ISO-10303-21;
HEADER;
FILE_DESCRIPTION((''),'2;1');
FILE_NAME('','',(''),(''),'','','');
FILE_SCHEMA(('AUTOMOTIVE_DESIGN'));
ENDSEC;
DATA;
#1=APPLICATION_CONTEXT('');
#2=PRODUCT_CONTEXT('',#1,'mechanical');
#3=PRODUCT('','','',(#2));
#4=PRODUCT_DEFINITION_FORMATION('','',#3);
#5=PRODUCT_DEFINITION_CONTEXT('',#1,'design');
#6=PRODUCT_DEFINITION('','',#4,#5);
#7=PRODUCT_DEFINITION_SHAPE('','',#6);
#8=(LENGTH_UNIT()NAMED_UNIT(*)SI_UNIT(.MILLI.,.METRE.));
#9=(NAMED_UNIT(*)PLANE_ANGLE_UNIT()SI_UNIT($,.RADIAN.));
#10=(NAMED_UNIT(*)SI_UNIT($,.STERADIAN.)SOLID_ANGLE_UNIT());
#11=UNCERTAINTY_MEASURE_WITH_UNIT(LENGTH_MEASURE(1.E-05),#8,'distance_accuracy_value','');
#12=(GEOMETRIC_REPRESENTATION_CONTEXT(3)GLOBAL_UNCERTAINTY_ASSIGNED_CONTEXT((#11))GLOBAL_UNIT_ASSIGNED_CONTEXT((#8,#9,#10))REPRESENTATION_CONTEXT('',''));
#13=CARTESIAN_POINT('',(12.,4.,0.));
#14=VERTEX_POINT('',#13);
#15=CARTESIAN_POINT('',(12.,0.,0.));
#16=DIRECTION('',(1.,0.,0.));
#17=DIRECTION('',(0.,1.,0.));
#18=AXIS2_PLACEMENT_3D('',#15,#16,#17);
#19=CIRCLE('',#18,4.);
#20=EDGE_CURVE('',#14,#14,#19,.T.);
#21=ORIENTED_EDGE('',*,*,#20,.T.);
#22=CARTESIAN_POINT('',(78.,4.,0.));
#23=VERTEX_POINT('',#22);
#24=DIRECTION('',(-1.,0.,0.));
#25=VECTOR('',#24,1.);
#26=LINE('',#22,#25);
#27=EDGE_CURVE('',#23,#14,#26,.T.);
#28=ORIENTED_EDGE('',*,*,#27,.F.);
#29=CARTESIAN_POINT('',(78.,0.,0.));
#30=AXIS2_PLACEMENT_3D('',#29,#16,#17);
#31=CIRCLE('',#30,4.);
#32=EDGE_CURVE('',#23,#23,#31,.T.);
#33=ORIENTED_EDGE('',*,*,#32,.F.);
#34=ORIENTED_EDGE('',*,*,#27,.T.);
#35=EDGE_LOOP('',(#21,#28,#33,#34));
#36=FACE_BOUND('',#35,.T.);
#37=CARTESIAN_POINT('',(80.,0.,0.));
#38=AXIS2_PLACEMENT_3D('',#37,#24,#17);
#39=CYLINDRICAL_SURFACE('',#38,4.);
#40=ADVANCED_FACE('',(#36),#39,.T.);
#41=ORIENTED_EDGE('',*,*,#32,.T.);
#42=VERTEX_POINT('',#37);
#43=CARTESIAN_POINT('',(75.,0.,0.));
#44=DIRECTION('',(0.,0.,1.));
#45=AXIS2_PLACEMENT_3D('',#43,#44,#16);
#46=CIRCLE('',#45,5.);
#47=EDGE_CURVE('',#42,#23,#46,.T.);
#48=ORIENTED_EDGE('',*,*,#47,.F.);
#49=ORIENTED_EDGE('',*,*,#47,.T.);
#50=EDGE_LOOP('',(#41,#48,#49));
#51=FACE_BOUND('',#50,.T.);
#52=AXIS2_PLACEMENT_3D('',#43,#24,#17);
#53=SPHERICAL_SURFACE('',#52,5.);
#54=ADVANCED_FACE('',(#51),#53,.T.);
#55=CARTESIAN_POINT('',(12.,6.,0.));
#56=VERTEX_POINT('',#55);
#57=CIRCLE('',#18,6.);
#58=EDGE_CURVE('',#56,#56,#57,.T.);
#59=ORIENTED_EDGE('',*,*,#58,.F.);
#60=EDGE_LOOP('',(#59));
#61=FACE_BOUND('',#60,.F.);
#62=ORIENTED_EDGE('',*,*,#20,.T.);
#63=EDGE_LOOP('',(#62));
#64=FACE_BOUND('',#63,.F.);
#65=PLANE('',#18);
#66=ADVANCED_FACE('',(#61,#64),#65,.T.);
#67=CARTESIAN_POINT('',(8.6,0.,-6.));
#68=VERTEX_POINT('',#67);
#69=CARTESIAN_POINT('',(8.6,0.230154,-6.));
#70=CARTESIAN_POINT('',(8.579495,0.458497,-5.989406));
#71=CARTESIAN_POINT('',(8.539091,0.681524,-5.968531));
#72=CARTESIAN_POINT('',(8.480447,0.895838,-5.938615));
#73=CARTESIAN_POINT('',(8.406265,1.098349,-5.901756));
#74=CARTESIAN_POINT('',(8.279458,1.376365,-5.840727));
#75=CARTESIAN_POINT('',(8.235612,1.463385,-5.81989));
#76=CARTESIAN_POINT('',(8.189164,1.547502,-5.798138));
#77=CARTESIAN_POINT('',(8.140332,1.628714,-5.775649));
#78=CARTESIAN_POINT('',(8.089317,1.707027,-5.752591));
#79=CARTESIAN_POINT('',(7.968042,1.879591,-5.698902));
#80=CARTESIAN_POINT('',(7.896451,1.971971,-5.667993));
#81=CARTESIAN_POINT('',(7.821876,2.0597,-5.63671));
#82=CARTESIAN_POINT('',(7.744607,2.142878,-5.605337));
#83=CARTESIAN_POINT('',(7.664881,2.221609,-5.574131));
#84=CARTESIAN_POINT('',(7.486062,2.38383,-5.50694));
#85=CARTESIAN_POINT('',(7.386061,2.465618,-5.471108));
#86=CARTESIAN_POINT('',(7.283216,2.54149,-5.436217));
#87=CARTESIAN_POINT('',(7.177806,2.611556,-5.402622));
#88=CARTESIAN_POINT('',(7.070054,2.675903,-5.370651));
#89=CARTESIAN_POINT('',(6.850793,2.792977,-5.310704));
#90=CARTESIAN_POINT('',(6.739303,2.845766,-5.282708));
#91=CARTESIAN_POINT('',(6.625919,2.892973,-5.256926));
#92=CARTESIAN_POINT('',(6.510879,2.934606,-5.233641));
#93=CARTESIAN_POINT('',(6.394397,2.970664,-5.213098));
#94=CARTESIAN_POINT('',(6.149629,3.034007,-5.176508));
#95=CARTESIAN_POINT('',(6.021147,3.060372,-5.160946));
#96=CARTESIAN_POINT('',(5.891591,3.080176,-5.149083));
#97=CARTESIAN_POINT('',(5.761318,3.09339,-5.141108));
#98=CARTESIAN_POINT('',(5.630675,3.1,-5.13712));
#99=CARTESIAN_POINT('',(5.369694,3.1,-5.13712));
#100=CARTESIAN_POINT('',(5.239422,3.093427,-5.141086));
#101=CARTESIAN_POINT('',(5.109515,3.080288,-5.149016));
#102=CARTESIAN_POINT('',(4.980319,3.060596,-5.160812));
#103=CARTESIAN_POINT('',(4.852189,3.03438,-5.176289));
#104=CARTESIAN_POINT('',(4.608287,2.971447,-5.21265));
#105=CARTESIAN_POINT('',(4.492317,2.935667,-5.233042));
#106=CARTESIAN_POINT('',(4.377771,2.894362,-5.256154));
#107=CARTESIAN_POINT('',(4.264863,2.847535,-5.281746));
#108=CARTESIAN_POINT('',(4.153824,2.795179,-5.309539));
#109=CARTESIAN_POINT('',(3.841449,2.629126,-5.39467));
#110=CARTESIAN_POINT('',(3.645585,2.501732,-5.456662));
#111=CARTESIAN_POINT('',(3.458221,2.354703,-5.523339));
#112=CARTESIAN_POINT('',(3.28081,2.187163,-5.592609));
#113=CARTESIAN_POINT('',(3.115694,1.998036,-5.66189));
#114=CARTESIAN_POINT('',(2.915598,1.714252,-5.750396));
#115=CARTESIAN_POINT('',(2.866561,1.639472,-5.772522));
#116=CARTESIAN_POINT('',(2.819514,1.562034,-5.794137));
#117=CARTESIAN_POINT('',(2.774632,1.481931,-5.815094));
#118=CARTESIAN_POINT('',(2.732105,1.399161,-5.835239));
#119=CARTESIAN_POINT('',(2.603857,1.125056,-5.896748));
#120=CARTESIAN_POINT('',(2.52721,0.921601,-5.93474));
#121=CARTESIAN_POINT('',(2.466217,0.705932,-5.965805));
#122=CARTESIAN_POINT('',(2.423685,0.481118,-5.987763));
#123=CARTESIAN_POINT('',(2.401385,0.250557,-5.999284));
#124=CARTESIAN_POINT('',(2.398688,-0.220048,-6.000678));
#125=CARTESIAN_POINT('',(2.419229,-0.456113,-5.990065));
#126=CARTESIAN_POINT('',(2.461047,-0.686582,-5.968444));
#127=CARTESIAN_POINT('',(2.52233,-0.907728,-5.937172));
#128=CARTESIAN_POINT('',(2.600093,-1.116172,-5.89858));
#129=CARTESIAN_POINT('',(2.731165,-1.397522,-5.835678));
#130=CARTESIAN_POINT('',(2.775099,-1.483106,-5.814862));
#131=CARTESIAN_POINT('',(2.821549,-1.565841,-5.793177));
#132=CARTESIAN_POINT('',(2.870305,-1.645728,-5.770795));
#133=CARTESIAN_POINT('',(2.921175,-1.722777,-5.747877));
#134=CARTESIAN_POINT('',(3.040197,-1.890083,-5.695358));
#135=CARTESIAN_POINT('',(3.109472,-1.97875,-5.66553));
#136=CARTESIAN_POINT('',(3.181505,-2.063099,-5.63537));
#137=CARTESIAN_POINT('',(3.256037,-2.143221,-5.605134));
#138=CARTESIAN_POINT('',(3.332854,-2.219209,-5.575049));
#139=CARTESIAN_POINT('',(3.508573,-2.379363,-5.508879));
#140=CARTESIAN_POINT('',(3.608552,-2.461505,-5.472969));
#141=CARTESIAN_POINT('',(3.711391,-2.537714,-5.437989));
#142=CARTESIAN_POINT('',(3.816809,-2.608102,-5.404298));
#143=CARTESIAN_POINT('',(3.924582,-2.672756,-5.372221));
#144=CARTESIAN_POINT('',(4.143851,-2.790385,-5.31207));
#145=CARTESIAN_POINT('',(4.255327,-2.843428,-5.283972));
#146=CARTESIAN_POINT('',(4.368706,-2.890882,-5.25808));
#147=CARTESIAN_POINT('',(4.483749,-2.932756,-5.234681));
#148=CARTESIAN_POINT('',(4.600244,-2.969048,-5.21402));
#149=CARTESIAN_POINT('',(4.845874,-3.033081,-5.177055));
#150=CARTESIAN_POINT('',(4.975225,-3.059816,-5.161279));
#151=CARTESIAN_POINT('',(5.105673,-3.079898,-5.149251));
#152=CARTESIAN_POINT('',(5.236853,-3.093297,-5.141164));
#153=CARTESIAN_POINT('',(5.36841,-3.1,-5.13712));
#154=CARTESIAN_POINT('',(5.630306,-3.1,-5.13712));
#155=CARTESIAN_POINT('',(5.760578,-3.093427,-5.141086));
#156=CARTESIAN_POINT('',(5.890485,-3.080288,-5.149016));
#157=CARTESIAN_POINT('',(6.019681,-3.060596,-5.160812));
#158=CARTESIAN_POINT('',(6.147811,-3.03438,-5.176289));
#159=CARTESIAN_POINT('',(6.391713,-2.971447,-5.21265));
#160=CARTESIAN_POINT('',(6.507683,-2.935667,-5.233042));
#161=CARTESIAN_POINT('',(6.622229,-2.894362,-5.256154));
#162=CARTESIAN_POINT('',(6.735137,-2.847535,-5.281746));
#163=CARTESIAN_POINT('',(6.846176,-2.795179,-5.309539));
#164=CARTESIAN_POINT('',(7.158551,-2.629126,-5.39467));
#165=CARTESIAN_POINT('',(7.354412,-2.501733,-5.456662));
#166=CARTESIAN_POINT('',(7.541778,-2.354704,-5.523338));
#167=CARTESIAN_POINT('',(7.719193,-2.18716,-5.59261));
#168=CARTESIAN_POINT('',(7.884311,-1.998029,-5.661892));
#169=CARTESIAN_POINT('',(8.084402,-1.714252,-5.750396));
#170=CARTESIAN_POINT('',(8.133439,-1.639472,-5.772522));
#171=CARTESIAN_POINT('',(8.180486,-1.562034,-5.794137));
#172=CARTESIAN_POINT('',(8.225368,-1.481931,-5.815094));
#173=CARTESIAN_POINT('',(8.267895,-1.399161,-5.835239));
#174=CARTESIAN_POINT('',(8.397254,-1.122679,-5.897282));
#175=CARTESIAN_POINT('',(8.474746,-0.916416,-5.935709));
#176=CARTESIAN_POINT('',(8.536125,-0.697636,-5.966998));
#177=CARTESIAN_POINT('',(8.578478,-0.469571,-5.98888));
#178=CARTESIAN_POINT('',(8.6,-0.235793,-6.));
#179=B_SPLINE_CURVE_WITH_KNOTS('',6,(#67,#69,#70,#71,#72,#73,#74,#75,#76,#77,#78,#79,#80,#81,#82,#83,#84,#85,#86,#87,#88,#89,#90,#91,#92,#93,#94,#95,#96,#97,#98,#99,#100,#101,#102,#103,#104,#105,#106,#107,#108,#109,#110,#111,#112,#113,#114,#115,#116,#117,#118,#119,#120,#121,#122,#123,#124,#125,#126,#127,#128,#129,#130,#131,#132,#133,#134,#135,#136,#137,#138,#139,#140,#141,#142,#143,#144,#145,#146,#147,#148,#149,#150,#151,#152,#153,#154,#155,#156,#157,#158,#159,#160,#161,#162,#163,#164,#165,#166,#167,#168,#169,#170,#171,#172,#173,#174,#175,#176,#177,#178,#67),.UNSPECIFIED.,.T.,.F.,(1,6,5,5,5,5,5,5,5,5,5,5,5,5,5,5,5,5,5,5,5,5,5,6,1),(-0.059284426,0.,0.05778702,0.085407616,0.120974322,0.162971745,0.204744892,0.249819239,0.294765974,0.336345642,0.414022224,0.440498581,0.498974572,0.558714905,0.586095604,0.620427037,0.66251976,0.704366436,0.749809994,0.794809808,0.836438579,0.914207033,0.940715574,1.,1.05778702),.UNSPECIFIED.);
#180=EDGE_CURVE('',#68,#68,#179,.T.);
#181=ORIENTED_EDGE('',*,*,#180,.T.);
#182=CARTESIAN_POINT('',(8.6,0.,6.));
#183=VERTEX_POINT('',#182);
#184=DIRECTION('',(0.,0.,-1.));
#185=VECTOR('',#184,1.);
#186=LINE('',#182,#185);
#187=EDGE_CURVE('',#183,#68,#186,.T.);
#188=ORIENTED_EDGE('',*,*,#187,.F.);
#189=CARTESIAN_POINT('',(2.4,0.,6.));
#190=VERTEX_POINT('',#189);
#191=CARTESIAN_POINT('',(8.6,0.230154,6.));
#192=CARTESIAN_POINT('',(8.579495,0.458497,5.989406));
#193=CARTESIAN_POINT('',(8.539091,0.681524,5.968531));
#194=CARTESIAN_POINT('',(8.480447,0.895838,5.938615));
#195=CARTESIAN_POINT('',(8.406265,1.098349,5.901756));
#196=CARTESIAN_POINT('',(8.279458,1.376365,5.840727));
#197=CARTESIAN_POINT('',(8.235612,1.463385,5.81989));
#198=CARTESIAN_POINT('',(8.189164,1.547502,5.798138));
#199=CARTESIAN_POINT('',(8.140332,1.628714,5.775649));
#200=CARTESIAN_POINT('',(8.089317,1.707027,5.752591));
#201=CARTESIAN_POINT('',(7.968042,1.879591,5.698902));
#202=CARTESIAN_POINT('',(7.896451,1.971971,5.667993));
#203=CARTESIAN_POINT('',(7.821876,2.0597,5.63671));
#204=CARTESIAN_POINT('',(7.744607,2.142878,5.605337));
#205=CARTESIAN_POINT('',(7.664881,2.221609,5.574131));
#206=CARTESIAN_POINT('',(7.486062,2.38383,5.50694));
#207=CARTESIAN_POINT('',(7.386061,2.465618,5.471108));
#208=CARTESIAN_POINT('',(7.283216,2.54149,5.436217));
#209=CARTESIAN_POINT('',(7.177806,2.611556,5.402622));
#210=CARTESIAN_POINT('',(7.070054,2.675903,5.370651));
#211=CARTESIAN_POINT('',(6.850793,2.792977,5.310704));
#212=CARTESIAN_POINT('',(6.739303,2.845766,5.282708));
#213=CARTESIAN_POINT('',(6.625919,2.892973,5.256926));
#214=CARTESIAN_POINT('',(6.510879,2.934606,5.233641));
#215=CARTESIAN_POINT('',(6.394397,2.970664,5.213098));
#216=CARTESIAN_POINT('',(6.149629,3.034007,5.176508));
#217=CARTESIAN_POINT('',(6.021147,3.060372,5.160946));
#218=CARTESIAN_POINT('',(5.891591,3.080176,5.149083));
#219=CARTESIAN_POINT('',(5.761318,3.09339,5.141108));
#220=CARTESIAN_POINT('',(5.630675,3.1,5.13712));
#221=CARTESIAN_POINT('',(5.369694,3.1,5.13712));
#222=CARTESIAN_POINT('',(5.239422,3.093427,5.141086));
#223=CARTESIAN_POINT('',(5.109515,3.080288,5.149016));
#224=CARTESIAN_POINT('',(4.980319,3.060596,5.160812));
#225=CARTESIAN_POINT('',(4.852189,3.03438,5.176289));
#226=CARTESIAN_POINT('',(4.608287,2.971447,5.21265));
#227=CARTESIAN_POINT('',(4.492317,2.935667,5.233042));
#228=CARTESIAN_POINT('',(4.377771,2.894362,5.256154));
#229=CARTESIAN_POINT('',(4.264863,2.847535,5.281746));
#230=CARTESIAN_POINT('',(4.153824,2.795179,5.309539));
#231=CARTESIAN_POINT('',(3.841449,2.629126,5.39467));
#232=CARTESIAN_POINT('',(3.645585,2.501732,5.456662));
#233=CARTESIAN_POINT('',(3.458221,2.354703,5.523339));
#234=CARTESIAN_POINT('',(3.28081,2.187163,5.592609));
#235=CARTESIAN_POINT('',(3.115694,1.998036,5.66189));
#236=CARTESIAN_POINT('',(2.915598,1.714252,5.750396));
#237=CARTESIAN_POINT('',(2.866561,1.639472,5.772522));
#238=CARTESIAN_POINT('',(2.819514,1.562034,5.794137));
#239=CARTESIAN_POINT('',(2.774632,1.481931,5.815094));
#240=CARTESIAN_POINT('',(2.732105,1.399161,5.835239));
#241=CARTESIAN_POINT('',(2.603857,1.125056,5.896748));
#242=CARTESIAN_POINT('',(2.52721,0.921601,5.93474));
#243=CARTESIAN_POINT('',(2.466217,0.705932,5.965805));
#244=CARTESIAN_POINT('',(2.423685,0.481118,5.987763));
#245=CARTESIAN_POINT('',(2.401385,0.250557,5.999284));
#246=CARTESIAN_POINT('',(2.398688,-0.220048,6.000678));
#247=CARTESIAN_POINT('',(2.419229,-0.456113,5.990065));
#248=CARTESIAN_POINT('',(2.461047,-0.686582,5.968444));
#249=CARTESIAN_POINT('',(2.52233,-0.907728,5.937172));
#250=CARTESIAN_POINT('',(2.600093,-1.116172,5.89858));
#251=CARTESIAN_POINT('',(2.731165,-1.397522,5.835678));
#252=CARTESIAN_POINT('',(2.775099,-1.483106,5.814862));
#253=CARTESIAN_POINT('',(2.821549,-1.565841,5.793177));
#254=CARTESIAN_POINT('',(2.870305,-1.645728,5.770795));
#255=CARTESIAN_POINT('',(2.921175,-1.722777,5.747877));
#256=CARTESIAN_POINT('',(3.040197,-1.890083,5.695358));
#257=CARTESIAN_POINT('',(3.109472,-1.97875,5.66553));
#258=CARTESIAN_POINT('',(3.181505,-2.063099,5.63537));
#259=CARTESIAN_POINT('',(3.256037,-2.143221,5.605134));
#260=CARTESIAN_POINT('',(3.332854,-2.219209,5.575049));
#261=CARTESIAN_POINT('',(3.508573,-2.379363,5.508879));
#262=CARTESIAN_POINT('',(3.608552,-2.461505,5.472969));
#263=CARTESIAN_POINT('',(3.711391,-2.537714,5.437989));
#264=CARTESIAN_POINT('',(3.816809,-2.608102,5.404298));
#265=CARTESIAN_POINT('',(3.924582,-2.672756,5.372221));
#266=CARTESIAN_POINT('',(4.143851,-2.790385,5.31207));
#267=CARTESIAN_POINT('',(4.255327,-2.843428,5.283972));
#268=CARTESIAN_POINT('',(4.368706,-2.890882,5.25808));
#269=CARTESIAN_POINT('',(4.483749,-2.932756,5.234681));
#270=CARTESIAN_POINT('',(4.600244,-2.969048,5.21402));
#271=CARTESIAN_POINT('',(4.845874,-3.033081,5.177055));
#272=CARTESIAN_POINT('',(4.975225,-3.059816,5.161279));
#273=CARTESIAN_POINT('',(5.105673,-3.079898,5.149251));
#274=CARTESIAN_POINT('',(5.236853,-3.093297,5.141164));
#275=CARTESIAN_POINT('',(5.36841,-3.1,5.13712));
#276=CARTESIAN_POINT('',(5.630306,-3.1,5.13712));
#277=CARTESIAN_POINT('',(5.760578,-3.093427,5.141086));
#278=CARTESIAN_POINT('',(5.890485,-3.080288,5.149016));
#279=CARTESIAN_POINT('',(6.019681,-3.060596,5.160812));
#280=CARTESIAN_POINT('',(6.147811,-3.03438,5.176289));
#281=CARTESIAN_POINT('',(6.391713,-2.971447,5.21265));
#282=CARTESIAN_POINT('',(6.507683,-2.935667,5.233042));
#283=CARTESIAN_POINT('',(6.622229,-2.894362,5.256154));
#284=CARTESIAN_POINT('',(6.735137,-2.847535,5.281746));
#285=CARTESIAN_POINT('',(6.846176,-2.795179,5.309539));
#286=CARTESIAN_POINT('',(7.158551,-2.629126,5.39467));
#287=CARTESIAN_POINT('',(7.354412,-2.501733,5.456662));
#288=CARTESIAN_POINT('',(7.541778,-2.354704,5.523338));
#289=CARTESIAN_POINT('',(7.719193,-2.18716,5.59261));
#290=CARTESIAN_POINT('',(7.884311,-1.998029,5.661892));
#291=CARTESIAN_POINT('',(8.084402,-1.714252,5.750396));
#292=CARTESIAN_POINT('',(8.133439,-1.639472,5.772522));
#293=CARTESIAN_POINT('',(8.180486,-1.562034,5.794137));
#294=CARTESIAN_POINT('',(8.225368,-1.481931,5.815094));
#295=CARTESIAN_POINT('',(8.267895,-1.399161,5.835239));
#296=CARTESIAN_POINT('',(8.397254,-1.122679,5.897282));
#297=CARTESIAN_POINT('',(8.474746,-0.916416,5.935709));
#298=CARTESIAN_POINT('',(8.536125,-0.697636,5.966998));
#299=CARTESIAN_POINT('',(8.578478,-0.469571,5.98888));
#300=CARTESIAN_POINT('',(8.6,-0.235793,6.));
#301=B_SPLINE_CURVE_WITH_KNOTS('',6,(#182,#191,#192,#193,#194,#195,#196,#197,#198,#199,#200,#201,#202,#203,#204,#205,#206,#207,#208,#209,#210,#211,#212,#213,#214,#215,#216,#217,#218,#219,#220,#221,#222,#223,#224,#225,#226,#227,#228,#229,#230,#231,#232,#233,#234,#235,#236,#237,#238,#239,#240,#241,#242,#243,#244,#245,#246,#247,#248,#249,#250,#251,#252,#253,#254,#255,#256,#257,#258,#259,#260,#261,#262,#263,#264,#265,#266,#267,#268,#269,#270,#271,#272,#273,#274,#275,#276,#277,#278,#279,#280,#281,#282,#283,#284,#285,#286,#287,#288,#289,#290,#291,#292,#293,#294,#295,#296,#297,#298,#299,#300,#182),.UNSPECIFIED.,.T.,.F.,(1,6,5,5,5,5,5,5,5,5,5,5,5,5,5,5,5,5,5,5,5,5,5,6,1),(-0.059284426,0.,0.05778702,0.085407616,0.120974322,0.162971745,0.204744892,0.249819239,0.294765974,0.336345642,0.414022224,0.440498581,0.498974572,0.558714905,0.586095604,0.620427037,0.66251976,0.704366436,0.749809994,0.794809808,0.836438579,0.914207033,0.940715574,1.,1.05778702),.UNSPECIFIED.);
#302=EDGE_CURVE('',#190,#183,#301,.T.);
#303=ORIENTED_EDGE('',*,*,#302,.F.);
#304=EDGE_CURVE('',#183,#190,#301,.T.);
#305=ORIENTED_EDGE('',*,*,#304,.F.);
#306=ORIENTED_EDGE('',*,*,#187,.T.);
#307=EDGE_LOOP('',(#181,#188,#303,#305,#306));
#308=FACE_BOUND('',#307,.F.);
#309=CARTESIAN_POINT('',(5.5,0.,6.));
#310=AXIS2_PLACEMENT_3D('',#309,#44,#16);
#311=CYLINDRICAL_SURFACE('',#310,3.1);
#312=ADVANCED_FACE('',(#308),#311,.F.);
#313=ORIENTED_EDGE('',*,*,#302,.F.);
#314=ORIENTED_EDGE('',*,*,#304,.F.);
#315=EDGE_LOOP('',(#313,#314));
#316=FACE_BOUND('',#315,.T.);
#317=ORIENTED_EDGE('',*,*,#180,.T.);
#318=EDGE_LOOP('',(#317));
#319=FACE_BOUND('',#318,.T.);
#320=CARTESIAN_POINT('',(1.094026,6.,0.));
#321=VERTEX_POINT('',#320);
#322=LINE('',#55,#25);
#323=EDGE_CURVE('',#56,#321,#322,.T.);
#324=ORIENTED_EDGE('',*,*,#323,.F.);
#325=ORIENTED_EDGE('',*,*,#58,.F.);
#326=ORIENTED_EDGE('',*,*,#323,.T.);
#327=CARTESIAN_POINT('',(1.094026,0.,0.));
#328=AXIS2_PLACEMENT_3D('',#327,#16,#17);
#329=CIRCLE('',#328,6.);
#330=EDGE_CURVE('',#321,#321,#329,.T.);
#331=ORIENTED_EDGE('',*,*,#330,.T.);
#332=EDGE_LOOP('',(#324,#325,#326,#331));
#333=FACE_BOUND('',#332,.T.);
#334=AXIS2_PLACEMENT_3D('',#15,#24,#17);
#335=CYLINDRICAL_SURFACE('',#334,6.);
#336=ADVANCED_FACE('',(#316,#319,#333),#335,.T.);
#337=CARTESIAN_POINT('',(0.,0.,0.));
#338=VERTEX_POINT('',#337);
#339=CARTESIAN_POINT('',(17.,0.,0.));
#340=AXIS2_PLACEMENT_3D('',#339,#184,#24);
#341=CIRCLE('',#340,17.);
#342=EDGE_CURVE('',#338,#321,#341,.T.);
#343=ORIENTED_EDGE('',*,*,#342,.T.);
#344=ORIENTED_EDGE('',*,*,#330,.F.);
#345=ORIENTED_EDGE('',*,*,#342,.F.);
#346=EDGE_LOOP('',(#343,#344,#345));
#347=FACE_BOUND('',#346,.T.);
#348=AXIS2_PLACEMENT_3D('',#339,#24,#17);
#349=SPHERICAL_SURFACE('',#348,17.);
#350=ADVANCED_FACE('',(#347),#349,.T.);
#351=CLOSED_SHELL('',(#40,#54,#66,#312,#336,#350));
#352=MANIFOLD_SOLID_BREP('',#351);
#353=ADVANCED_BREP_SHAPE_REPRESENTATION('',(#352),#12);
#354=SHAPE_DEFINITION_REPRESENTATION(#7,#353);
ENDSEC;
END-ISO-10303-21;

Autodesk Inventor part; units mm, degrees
ref_plane "YZ Plane" through (0, 0, 0) normal (1, 0, 0) x (0, 1, 0)
ref_plane "XZ Plane" through (0, 0, 0) normal (0, 1, 0) x (-1, 0, 0)
sketch "Sketch1" plane through (0, 0, 0) normal (0, 0, 1) x (1, 0, 0)
  line L0 (0, 0) -> (80, 0)
  line L1 (80, 0) -> (80, 4)
  line L2 (80, 4) -> (0, 4)
  line L3 (0, 4) -> (0, 0)
  line L4 (80, 0) -> (75, 0)
  circle A0 centre (75, 0) radius 5
  line L5 (0, 0) -> (12, 0)
  line L6 (12, 0) -> (12, 6)
  line L7 (12, 6) -> (0, 6)
  line L8 (0, 6) -> (0, 0)
  line L9 (0, 0) -> (17, 0)
  circle A1 centre (17, 0) radius 17
  point P0 (78, 4)
  point P1 (12, 4)
  point P2 (1.094, 6)
  dimension "d0" = 80
  dimension "d1" = 4
  dimension "d2" = 5
  dimension "d3" = 12
  dimension "d4" = 6
  dimension "d5" = 17
revolve "Revolution1" add sketch "Sketch1" angle 360 about axis through (0, 0, 0) along (1, 0, 0) picked at (8.3647, 5.3333) contours A1 L2 L6 L0 | L6 L2 A1 L0 | A1 L2 A0 L0 | A1 L7 L6 L2 | A0 L2 L0
ref_plane "Work Plane1" through (6.547, 0, 6) normal (0, 0, 1) x (1, 0, 0)
sketch "Sketch2" plane through (6.547, 0, 6) normal (0, 0, 1) x (1, 0, 0)
  line L0 (5.453, -4) -> (5.453, 4) projected
  line L1 (5.453, 0) -> (-1.047, 0)
  circle A0 centre (-1.047, 0) radius 3.1
  point P0 (-6.547, 0)
  dimension "d7" = 6.5
  dimension "d8" = 6.2
extrude "Extrusion1" cut sketch "Sketch2" against normal through all
thread "Thread1" size "M8x1.25" class "6g" standard "ANSI Metric M Profile" length 50
properties part number "Mozgatóorsó"
